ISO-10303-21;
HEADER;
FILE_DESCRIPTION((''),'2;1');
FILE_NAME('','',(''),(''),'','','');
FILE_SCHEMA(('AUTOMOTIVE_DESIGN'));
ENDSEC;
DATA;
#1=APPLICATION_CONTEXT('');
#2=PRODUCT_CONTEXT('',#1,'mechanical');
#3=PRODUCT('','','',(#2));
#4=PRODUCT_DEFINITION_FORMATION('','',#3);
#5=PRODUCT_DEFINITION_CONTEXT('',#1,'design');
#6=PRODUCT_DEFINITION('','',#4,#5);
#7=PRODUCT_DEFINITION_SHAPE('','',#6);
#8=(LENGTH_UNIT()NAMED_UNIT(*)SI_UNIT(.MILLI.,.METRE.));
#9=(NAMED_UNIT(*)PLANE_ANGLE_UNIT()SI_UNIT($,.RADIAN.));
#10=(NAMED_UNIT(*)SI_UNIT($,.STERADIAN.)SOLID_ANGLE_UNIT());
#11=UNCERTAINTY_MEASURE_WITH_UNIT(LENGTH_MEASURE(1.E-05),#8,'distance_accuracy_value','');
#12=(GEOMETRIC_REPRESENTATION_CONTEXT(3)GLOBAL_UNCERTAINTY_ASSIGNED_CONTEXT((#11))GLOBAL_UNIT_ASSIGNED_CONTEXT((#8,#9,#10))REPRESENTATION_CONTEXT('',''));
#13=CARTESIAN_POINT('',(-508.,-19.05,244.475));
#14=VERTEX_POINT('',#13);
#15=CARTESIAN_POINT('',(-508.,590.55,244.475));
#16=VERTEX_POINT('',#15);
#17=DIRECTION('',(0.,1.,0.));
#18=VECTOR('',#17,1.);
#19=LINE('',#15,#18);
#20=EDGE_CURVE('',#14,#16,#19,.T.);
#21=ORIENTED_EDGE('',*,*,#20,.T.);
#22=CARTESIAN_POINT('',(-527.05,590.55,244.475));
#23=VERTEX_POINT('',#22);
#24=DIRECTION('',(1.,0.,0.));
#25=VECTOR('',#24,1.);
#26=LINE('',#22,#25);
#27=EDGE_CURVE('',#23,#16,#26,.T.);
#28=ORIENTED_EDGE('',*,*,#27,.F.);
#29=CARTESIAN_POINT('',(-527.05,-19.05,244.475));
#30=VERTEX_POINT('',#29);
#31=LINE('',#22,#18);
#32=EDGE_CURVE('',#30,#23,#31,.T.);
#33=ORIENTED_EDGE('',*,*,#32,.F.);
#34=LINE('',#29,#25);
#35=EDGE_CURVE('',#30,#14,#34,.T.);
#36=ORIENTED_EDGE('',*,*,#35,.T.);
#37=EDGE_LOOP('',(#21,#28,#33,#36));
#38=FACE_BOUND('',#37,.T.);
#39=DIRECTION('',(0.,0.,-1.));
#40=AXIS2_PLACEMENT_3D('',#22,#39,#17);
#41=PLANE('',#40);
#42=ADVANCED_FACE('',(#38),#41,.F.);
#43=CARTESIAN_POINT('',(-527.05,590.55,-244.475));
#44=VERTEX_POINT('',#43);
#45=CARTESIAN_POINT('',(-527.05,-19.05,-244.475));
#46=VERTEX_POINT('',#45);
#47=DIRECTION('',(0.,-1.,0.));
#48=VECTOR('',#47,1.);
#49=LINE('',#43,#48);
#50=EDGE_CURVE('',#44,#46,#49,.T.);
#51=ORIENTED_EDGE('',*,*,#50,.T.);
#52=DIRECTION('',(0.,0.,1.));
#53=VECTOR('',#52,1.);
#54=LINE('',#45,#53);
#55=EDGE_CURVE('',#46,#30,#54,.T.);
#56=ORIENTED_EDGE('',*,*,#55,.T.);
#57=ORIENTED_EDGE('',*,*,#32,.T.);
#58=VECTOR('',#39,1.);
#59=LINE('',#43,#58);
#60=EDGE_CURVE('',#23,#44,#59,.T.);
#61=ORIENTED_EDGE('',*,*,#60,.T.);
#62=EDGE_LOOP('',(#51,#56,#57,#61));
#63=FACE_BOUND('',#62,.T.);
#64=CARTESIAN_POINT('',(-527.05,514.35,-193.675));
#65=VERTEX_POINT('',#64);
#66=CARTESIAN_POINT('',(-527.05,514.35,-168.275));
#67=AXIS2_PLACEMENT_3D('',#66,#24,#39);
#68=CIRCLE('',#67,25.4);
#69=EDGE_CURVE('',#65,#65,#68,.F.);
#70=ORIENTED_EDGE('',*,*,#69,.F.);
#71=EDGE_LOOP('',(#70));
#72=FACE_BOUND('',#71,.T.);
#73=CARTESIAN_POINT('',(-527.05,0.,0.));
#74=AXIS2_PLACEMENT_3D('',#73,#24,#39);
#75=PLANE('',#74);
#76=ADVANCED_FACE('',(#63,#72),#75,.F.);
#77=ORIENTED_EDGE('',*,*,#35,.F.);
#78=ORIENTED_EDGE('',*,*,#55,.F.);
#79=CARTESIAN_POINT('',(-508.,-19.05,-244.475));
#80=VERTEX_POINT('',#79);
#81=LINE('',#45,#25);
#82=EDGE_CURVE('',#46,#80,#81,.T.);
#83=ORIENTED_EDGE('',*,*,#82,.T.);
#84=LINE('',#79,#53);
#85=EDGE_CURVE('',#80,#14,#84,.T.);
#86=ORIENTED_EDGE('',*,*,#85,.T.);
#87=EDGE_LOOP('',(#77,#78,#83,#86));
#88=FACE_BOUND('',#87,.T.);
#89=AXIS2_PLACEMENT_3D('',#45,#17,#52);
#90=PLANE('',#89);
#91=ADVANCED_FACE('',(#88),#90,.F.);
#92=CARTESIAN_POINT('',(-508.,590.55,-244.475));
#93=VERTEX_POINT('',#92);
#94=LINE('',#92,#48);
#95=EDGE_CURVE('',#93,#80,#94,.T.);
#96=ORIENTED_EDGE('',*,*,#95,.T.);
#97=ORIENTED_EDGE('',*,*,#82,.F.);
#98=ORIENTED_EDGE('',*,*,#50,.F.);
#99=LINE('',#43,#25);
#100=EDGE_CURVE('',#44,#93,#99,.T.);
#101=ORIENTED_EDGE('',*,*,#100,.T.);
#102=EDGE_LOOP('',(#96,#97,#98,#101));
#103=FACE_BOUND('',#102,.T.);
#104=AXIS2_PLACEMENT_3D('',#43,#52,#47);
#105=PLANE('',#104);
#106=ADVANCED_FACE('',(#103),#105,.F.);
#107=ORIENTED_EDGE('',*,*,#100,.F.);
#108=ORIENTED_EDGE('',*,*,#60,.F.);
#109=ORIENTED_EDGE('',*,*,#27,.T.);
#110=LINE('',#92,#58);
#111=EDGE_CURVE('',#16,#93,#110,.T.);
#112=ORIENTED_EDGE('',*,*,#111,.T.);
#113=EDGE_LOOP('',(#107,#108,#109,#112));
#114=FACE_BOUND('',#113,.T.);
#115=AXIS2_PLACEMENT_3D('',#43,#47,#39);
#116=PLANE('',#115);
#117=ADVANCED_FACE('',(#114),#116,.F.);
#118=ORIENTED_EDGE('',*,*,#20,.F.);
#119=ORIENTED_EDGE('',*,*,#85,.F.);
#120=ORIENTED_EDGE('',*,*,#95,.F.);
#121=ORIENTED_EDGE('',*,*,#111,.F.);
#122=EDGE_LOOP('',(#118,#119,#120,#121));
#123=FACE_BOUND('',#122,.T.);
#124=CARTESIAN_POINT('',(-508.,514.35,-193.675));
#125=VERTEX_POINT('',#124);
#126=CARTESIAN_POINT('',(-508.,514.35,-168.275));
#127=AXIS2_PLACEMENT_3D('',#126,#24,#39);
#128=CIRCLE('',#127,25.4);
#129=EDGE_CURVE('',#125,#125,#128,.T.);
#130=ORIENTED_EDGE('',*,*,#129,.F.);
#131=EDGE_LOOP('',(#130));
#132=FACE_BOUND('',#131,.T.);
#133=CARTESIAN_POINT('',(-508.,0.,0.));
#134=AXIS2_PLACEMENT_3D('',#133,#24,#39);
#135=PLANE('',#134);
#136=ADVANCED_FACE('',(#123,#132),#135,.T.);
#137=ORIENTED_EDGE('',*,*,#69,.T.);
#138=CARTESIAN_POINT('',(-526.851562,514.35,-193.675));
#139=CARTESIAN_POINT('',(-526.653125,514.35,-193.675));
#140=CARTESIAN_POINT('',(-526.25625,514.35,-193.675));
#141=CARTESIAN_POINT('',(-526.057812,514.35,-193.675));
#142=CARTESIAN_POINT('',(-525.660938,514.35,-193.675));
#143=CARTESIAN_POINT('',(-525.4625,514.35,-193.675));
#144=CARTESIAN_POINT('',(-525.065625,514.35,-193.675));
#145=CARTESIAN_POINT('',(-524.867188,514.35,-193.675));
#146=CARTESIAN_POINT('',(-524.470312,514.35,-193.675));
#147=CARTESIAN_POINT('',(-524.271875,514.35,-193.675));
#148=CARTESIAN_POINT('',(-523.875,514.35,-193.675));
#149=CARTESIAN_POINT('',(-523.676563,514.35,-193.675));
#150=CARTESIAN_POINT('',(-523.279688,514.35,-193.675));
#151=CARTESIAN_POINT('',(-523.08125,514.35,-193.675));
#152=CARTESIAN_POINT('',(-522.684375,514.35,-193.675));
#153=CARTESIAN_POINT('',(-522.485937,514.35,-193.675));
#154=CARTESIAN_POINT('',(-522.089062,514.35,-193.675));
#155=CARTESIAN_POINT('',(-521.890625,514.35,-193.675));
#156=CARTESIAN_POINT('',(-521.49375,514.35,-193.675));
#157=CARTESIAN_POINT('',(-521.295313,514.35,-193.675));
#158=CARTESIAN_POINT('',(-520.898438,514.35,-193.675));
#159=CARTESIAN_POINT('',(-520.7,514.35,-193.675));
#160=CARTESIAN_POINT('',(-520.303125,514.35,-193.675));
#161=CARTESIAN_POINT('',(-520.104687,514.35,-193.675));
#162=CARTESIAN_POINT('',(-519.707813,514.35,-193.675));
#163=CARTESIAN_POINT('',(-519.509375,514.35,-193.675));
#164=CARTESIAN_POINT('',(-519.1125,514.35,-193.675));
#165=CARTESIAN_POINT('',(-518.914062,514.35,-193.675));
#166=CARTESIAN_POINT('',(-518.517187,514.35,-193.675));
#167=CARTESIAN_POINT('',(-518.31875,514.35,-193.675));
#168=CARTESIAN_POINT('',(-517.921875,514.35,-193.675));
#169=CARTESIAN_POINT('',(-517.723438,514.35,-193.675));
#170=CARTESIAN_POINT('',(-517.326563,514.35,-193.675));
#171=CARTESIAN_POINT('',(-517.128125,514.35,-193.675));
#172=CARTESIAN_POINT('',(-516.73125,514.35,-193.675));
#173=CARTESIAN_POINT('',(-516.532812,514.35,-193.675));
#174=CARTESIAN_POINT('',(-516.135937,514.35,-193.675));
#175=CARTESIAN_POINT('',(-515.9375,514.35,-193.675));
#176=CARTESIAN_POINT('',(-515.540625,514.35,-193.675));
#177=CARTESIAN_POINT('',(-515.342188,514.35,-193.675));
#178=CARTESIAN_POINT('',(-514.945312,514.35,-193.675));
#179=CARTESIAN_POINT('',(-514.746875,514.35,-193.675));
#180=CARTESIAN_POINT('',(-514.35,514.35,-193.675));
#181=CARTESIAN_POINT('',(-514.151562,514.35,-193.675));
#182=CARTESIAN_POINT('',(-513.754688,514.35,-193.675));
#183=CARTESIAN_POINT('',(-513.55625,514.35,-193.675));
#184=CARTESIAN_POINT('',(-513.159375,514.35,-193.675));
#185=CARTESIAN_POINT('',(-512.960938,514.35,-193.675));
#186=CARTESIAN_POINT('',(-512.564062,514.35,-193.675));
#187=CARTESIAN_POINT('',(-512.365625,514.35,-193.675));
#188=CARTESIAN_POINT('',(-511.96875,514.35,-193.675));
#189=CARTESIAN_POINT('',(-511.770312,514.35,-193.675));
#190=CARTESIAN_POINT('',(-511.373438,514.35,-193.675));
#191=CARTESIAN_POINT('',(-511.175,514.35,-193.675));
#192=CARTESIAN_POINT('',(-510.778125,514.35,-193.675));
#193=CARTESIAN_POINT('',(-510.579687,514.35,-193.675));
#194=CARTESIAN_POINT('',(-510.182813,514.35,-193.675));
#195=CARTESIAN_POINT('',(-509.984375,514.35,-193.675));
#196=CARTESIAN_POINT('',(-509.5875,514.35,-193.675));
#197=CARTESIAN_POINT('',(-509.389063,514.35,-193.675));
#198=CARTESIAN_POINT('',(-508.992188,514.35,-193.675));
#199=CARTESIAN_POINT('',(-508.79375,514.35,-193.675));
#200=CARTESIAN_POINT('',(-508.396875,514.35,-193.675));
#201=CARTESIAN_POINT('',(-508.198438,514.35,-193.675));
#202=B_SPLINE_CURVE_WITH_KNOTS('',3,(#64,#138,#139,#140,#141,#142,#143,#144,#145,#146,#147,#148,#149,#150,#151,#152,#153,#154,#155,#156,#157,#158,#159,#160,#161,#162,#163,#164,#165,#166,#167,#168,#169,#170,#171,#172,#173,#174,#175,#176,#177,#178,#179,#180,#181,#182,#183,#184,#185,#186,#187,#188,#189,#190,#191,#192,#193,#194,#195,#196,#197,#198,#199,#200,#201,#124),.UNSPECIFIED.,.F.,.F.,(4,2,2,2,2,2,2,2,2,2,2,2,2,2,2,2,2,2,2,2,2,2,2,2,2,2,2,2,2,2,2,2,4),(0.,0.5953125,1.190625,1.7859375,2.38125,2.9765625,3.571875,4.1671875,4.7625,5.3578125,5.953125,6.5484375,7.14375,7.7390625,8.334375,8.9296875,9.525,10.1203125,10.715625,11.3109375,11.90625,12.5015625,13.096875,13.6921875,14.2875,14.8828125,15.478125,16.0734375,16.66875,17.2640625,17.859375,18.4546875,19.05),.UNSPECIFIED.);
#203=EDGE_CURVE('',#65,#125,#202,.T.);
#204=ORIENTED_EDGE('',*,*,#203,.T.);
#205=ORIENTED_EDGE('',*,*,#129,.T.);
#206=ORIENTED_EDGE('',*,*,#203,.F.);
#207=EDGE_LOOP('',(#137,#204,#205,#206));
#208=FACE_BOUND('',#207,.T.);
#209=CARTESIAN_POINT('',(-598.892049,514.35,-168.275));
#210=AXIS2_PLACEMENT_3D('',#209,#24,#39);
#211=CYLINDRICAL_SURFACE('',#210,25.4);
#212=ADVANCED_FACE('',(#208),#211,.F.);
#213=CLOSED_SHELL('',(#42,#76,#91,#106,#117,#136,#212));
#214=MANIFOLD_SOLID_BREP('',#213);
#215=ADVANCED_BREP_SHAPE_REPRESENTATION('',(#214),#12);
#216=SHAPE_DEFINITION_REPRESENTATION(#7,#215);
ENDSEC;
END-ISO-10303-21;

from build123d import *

# Parameters (mm, degrees)
STOCK_BOXV2_1_START     = -19.05
STOCK_BOXV2_1_OUTLINE_W = 19.05
STOCK_BOXV2_1_OUTLINE_H = 488.95
STOCK_BOXV2_1_DEPTH     = 609.6
SKETCH1_R               = 25.4
CUT_EXTRUDE1_DEPTH      = 19.05


# Read off the part's stored shape, not the designer's step: Stock-boxV2-1
with BuildPart() as part:
    # Stock-boxV2-1 outline → Stock-boxV2-1 (new body)
    with BuildSketch(Plane(origin=(0, 0, 0), x_dir=(1, 0, 0), z_dir=(0, 1, 0)).offset(STOCK_BOXV2_1_START)):
        with Locations((-517.525, 0)):
            Rectangle(STOCK_BOXV2_1_OUTLINE_W, STOCK_BOXV2_1_OUTLINE_H)
    extrude(amount=STOCK_BOXV2_1_DEPTH)

    # Sketch1 → Cut-Extrude1 (cut)
    with BuildSketch(Plane(origin=(-508, 0, 0), x_dir=(0, 0, -1), z_dir=(1, 0, 0))):
        with Locations((168.275, 514.35)):
            Circle(SKETCH1_R)
    extrude(amount=-CUT_EXTRUDE1_DEPTH, mode=Mode.SUBTRACT)


solid = part.part
